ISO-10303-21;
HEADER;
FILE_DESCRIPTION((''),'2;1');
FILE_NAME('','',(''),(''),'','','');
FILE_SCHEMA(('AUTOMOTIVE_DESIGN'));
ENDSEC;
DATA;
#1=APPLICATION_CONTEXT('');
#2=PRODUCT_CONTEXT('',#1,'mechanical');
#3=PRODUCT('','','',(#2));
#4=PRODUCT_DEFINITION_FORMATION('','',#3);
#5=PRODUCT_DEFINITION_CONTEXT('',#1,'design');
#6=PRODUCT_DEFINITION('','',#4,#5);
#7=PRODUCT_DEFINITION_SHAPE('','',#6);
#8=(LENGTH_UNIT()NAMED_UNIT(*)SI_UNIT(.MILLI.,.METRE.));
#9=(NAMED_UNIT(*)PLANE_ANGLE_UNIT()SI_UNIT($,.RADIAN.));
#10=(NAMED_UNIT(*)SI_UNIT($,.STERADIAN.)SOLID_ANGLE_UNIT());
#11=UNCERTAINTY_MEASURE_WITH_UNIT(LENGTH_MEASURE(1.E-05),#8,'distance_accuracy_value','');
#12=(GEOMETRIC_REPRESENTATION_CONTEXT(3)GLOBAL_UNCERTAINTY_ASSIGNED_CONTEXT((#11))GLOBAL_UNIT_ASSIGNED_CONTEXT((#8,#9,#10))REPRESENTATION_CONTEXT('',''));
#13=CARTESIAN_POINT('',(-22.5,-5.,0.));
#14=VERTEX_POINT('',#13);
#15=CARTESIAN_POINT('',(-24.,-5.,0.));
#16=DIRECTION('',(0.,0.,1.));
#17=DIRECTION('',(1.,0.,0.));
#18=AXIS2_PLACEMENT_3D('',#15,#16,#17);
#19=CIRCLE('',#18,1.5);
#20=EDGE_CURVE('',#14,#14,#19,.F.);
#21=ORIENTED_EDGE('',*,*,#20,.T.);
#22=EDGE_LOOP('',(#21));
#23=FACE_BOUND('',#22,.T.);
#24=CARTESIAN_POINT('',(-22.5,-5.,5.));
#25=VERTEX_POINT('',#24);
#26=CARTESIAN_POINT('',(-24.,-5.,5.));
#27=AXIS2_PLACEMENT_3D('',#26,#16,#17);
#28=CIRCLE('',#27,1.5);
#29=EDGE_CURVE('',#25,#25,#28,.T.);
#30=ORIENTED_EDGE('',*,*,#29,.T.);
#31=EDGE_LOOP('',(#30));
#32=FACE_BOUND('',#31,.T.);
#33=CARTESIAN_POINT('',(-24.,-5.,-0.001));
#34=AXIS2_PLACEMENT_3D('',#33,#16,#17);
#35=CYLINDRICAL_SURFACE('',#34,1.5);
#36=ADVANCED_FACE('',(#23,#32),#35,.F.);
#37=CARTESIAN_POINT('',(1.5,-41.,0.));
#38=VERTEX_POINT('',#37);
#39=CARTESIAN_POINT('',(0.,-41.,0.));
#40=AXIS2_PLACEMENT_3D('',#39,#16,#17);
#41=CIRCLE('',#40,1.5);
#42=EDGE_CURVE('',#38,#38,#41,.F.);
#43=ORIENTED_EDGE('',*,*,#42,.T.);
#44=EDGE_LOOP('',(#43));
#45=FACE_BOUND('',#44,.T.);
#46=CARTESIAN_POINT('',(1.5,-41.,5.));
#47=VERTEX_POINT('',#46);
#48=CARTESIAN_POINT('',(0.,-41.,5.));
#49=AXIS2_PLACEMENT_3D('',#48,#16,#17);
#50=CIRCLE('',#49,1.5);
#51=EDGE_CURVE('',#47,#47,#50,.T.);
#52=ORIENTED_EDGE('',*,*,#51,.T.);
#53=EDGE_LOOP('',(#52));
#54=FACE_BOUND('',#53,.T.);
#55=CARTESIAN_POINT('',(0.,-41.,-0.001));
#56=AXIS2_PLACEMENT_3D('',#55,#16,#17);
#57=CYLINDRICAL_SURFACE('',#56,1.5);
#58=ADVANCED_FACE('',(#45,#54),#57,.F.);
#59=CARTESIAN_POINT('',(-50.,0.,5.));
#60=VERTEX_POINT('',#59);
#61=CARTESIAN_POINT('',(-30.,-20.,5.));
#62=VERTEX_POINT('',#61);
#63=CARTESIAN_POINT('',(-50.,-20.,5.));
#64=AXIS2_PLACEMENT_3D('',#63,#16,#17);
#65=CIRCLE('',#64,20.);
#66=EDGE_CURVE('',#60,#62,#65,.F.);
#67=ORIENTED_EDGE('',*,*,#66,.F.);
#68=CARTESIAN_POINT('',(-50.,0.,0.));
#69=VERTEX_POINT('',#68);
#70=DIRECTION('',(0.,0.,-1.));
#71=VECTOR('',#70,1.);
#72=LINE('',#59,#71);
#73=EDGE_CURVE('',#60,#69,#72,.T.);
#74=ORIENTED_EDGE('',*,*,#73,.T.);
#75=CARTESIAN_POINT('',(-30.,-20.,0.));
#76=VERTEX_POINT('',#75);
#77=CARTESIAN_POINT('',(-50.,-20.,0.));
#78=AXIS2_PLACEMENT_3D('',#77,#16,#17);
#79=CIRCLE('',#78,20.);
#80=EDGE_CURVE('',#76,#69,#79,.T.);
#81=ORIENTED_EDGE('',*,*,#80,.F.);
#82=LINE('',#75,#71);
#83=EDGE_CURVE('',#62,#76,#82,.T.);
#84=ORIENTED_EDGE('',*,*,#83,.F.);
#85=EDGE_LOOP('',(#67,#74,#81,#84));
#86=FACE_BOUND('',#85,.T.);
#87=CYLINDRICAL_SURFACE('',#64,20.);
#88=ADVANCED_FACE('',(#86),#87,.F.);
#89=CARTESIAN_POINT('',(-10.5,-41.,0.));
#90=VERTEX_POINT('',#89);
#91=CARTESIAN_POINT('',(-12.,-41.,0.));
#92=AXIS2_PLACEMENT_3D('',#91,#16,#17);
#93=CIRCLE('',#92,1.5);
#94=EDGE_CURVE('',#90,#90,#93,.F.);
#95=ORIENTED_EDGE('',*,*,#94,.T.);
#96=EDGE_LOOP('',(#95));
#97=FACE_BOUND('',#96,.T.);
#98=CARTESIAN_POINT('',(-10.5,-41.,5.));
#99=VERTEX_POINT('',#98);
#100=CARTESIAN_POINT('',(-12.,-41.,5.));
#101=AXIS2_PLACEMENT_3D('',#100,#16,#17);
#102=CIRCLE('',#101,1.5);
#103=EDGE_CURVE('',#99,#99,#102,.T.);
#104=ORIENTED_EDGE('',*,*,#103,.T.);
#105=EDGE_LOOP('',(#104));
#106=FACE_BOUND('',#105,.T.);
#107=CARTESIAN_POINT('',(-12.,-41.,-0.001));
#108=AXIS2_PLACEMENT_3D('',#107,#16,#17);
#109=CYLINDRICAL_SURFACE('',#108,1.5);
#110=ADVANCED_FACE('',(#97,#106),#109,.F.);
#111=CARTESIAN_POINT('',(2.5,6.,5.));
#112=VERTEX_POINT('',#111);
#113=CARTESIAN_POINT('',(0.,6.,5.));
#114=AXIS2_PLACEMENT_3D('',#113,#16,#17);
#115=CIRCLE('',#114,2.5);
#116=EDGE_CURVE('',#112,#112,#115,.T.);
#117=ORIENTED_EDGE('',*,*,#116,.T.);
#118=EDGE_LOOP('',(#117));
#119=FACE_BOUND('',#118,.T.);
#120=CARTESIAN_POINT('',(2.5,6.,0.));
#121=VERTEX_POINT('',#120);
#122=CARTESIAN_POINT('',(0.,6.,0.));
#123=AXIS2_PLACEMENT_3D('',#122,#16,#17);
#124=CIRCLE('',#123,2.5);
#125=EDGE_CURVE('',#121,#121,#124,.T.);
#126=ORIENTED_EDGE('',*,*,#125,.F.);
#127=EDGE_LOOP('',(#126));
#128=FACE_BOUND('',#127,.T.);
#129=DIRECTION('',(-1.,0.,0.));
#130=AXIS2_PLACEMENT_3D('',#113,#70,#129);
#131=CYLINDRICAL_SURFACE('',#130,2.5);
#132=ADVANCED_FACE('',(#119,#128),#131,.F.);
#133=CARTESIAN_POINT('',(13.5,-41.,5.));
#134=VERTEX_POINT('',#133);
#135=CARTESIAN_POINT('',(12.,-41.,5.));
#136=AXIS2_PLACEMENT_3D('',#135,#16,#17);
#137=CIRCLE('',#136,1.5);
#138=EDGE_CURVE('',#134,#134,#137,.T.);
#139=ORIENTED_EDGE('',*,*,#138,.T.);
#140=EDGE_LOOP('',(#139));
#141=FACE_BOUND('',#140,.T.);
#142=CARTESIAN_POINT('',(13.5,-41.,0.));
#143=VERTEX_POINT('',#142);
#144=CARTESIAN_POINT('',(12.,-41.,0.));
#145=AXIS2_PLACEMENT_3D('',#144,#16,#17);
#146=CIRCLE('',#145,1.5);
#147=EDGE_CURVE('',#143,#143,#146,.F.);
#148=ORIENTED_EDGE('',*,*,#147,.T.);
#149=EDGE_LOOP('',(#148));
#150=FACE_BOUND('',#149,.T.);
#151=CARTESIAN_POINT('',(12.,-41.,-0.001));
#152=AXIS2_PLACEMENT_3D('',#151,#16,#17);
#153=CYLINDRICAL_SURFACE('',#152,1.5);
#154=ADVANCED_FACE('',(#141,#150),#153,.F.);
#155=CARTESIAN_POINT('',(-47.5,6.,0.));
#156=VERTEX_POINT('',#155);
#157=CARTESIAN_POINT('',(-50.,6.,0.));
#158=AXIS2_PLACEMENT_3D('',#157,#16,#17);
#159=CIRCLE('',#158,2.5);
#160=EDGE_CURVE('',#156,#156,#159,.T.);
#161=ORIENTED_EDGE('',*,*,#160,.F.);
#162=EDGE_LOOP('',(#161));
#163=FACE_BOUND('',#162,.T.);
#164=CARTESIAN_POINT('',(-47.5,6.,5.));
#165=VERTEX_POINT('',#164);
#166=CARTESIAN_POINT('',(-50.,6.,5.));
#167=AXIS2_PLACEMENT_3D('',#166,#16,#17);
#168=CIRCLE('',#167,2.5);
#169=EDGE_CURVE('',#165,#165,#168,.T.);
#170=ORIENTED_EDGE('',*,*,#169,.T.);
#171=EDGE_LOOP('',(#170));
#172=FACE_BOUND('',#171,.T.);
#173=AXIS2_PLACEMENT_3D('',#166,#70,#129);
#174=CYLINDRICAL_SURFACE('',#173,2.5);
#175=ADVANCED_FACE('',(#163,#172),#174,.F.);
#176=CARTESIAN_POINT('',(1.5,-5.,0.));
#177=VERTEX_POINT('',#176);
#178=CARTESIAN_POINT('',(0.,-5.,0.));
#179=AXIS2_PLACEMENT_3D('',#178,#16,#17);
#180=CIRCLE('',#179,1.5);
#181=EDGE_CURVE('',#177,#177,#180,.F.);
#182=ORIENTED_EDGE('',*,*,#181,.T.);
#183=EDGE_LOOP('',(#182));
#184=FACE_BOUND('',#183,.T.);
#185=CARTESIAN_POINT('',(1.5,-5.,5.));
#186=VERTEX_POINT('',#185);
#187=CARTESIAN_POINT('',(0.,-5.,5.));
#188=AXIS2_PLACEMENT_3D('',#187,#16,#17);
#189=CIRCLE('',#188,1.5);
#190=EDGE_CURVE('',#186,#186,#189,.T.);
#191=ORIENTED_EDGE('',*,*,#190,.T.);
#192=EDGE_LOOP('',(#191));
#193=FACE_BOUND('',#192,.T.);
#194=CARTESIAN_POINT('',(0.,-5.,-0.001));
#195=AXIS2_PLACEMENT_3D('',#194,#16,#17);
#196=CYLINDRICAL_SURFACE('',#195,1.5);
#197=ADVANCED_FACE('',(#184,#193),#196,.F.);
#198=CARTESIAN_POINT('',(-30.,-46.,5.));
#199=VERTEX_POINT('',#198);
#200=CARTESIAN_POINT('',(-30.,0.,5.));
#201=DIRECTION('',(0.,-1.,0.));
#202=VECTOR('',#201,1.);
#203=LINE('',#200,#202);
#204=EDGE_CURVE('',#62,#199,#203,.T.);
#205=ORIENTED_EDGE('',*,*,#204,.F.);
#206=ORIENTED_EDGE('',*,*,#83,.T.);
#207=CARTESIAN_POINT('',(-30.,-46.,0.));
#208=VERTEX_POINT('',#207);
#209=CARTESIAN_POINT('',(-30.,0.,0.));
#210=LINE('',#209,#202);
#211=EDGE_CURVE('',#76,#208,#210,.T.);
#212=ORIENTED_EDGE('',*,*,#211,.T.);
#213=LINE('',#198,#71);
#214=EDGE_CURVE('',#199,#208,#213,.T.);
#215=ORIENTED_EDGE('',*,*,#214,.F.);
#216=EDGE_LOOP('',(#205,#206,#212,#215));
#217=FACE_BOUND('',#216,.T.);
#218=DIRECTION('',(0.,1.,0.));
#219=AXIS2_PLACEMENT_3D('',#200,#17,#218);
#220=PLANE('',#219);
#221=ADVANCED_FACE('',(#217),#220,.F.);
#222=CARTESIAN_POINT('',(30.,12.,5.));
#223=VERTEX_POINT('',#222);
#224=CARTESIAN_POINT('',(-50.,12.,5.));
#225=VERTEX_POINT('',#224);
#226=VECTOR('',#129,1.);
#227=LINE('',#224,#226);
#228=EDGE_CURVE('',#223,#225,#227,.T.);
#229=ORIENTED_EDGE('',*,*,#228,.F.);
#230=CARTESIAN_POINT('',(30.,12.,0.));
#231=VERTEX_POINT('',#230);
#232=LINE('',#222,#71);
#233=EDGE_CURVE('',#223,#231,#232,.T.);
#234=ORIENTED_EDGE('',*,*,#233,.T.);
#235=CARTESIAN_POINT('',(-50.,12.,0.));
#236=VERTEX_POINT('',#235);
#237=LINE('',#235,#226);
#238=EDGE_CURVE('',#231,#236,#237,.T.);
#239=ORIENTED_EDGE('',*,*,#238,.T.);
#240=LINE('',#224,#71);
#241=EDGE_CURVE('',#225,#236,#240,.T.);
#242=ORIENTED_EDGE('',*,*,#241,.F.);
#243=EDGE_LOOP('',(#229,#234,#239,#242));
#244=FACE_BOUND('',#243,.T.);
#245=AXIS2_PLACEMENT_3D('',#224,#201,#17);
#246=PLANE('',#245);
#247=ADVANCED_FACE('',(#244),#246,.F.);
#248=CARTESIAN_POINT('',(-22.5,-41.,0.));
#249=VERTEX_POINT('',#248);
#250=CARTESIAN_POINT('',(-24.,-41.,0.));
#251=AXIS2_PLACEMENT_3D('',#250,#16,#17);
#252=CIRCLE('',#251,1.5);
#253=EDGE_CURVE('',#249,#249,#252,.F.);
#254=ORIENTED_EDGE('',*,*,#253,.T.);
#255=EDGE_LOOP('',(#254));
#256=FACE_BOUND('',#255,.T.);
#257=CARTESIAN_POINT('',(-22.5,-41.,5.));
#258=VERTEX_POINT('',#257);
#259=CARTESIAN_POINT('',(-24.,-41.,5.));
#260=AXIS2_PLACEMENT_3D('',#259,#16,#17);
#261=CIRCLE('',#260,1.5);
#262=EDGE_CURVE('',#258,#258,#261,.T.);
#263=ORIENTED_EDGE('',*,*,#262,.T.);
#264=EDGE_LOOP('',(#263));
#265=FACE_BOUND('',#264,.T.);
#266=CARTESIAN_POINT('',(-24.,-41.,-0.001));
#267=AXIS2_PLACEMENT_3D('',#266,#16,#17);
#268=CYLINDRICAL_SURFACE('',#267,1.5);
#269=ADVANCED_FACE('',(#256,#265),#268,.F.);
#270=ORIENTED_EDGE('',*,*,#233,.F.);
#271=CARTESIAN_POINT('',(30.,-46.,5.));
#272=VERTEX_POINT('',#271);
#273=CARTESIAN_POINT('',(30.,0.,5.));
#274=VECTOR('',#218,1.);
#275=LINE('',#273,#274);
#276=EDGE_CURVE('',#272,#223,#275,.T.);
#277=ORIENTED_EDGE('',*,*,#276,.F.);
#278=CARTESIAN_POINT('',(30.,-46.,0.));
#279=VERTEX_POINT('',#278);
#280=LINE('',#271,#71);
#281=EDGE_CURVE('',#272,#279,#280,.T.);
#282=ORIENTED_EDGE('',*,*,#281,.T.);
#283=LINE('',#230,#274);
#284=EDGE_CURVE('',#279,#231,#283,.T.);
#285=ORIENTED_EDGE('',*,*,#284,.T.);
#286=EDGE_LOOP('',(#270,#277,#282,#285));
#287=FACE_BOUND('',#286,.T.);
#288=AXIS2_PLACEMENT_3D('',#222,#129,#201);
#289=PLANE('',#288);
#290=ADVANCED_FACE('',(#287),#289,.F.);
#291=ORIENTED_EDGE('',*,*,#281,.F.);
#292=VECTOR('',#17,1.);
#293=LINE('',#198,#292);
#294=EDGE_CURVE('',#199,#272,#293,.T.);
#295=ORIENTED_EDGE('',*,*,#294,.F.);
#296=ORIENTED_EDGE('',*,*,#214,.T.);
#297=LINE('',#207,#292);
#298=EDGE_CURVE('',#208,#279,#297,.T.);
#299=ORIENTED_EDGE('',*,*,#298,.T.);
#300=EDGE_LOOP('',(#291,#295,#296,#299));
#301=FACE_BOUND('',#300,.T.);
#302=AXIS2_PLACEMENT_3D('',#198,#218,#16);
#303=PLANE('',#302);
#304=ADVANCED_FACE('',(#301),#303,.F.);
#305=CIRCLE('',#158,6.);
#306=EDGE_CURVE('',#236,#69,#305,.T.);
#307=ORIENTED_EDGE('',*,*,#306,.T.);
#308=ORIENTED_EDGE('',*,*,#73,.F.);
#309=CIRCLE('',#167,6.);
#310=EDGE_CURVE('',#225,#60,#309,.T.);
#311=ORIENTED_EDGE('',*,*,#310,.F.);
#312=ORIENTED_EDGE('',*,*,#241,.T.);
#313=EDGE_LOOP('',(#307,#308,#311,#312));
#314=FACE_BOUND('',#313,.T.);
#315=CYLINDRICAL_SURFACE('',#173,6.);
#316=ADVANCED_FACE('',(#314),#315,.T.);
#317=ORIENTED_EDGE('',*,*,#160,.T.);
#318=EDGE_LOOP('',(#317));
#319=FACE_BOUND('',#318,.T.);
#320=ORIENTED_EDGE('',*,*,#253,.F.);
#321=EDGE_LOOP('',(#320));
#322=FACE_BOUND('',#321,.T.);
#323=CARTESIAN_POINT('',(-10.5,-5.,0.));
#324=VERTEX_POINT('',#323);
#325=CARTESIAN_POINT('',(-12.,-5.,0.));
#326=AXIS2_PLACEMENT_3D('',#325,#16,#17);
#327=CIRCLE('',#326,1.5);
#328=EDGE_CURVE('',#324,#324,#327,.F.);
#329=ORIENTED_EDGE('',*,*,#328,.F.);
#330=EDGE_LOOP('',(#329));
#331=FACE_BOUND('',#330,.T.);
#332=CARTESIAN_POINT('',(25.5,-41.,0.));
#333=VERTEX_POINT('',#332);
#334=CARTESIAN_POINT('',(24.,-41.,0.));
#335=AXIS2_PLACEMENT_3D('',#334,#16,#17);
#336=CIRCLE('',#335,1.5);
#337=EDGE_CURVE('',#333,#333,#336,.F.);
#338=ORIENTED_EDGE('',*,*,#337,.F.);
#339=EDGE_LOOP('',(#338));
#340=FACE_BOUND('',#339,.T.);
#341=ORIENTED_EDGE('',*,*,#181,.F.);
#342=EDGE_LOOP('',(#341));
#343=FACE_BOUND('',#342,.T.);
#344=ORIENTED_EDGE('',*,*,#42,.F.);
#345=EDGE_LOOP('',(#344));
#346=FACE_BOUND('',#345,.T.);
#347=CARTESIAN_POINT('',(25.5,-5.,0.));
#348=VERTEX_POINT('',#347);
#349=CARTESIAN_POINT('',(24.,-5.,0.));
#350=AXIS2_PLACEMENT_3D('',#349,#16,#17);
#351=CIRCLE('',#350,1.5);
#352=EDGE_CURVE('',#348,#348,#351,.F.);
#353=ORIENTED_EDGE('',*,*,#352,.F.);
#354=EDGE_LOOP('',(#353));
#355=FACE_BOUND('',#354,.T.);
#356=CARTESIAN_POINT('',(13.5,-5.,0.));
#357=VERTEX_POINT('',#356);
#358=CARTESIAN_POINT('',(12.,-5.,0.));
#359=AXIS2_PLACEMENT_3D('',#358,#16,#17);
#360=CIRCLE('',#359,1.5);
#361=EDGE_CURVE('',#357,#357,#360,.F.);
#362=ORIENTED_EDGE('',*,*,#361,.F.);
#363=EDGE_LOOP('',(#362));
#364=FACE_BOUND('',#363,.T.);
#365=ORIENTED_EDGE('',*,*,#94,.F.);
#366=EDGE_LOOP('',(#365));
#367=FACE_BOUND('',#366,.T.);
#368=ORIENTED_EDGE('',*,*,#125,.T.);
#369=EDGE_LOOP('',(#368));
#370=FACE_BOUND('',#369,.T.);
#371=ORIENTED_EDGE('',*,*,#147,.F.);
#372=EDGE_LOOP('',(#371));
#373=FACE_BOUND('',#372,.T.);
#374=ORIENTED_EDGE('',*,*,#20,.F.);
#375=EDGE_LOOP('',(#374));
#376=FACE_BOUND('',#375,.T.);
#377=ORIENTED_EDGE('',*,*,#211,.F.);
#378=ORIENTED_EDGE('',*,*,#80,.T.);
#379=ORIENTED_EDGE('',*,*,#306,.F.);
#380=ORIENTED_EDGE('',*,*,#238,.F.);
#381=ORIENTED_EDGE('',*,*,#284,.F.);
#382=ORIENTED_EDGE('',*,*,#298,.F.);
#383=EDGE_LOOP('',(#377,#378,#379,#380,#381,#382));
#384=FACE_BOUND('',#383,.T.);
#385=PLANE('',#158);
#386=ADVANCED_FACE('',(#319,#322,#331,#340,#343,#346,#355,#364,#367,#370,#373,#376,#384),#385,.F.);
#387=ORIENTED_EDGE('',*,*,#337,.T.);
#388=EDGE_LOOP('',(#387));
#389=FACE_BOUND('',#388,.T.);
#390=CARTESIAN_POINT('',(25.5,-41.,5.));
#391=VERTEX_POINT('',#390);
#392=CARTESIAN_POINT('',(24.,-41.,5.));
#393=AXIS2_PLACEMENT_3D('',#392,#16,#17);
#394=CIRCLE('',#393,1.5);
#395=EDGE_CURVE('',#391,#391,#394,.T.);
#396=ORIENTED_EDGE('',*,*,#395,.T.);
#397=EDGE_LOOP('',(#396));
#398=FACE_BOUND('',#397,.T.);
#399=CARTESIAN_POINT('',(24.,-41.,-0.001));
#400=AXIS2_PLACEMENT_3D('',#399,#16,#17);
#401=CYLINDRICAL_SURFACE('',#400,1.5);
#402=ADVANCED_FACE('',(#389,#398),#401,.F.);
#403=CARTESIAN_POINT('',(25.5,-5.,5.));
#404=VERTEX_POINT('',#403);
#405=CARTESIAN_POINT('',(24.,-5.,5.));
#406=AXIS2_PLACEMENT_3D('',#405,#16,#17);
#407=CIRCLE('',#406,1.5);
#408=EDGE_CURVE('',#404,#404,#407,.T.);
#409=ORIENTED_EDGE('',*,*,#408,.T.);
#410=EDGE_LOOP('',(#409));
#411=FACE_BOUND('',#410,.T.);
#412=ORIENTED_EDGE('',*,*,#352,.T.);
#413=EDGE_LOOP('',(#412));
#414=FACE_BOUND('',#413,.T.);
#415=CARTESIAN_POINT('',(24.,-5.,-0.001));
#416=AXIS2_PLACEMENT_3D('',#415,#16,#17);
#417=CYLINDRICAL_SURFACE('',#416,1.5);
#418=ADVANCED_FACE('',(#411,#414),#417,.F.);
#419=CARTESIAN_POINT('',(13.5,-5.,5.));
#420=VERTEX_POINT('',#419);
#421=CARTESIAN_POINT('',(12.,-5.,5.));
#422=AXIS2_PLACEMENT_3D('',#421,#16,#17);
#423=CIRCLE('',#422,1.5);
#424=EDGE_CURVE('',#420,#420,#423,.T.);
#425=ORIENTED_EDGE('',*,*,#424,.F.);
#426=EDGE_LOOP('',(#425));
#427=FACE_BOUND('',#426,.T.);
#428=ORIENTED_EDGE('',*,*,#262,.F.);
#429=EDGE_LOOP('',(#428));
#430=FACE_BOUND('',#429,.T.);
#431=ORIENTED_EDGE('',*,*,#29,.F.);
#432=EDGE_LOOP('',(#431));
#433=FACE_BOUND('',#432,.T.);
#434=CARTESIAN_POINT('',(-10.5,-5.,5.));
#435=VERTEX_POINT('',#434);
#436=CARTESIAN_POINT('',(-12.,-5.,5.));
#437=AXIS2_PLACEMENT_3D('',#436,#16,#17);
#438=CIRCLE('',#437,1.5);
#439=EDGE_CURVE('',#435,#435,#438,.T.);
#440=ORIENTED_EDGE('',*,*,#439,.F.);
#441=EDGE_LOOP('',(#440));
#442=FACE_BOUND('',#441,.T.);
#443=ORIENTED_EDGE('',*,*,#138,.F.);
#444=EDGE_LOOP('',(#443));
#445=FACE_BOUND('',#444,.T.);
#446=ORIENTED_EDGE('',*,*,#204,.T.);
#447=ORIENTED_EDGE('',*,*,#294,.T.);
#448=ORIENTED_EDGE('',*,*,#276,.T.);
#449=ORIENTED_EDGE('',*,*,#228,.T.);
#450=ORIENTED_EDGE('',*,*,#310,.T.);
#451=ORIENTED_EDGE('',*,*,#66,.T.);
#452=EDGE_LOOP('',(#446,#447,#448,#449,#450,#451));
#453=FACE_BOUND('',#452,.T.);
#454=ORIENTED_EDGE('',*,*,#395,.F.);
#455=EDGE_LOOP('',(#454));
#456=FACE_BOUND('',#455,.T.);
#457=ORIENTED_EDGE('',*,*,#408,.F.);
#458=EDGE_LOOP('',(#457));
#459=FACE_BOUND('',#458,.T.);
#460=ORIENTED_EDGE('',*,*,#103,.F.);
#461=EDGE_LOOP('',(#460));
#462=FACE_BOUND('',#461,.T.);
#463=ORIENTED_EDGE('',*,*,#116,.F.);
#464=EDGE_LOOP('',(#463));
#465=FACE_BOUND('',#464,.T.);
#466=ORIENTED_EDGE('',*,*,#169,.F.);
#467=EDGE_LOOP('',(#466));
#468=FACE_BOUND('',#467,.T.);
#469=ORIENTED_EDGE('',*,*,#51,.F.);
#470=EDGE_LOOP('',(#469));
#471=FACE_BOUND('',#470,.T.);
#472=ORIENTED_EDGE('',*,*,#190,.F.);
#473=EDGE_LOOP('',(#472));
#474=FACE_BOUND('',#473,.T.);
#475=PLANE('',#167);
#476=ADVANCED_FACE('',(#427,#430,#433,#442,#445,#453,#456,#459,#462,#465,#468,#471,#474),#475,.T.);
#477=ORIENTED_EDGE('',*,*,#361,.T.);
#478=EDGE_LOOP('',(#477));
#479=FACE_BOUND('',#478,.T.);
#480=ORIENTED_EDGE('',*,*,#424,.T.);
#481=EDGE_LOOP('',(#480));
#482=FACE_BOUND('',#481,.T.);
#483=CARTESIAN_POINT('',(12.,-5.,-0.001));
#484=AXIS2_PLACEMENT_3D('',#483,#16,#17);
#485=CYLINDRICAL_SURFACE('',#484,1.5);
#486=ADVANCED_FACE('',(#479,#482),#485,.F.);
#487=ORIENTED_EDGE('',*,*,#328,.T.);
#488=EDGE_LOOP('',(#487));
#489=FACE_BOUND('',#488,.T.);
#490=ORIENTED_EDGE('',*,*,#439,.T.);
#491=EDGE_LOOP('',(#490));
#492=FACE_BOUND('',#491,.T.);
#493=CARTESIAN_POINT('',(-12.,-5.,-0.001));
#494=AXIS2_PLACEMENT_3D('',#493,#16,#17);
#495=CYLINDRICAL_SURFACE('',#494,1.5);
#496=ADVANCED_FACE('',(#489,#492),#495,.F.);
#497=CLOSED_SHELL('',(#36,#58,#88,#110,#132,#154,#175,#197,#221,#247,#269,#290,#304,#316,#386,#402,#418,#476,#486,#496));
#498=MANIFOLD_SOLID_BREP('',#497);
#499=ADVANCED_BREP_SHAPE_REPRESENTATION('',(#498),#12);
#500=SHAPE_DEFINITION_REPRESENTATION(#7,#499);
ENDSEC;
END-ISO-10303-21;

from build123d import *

# Parameters (mm, degrees)
SKETCH_1_R             = 2.5
EXTRUDE_1_DEPTH        = 5
CUT_EXTRUDE_1_REACH    = 74.643
SKETCH_2_R             = 1.5
PATTERN_LINEAR_1_COUNT = 5
PATTERN_LINEAR_1_PITCH = 12
FILLET_1_R             = 20


with BuildPart() as part:
    # 草圖1 → 填料-伸長1 (new body)
    with BuildSketch(Plane.XY):
        with BuildLine():
            Line((-30, 0), (-30, -46))
            Line((-30, -46), (30, -46))
            Line((30, -46), (30, 0))
            Line((30, 0), (30, 12))
            Line((30, 12), (-50, 12))
            ThreePointArc((-50, 12), (-56, 6), (-50, 0))
            Line((-50, 0), (-30, 0))
        make_face()
        with Locations((0, 6)):
            Circle(SKETCH_1_R, mode=Mode.SUBTRACT)
        with Locations((-50, 6)):
            Circle(SKETCH_1_R, mode=Mode.SUBTRACT)
    extrude(amount=EXTRUDE_1_DEPTH)

    # 草圖2 → 除料-伸長1 (cut, up to next)
    with BuildSketch(Plane.XY.offset(5), mode=Mode.PRIVATE) as cut_extrude_1_sk1:
        with Locations((-24, -5)):
            Circle(SKETCH_2_R)
    cut_extrude_1_tool1 = extrude(cut_extrude_1_sk1.sketch, amount=-CUT_EXTRUDE_1_REACH, mode=Mode.PRIVATE) & part.part
    # 草圖2 → 除料-伸長1 (cut, up to next)
    with BuildSketch(Plane.XY.offset(5), mode=Mode.PRIVATE) as cut_extrude_1_sk2:
        with Locations((-24, -41)):
            Circle(SKETCH_2_R)
    cut_extrude_1_tool2 = extrude(cut_extrude_1_sk2.sketch, amount=-CUT_EXTRUDE_1_REACH, mode=Mode.PRIVATE) & part.part
    cut_extrude_1_1 = cut_extrude_1_tool1.solids().sort_by_distance((-24, -5, 5))[0]
    add(cut_extrude_1_1, mode=Mode.SUBTRACT)
    cut_extrude_1_2 = cut_extrude_1_tool2.solids().sort_by_distance((-24, -41, 5))[0]
    add(cut_extrude_1_2, mode=Mode.SUBTRACT)
    cut_extrude_1 = cut_extrude_1_1 + cut_extrude_1_2  # 除料-伸長1 as one shape, for the pattern or mirror that repeats it

    # 直線複製排列1: 除料-伸長1 ×5
    with Locations(*[(i * PATTERN_LINEAR_1_PITCH, 0, 0) for i in range(1, PATTERN_LINEAR_1_COUNT)]):
        add(cut_extrude_1, mode=Mode.SUBTRACT)

    # 圓角1
    fillet_1_edges = [part.edges().sort_by_distance(p)[0] for p in [
        (-30, 0, 2.5),
    ]]
    fillet(fillet_1_edges, radius=FILLET_1_R - 0.0001)  # a hair under: the kernel refuses the full size


solid = part.part
